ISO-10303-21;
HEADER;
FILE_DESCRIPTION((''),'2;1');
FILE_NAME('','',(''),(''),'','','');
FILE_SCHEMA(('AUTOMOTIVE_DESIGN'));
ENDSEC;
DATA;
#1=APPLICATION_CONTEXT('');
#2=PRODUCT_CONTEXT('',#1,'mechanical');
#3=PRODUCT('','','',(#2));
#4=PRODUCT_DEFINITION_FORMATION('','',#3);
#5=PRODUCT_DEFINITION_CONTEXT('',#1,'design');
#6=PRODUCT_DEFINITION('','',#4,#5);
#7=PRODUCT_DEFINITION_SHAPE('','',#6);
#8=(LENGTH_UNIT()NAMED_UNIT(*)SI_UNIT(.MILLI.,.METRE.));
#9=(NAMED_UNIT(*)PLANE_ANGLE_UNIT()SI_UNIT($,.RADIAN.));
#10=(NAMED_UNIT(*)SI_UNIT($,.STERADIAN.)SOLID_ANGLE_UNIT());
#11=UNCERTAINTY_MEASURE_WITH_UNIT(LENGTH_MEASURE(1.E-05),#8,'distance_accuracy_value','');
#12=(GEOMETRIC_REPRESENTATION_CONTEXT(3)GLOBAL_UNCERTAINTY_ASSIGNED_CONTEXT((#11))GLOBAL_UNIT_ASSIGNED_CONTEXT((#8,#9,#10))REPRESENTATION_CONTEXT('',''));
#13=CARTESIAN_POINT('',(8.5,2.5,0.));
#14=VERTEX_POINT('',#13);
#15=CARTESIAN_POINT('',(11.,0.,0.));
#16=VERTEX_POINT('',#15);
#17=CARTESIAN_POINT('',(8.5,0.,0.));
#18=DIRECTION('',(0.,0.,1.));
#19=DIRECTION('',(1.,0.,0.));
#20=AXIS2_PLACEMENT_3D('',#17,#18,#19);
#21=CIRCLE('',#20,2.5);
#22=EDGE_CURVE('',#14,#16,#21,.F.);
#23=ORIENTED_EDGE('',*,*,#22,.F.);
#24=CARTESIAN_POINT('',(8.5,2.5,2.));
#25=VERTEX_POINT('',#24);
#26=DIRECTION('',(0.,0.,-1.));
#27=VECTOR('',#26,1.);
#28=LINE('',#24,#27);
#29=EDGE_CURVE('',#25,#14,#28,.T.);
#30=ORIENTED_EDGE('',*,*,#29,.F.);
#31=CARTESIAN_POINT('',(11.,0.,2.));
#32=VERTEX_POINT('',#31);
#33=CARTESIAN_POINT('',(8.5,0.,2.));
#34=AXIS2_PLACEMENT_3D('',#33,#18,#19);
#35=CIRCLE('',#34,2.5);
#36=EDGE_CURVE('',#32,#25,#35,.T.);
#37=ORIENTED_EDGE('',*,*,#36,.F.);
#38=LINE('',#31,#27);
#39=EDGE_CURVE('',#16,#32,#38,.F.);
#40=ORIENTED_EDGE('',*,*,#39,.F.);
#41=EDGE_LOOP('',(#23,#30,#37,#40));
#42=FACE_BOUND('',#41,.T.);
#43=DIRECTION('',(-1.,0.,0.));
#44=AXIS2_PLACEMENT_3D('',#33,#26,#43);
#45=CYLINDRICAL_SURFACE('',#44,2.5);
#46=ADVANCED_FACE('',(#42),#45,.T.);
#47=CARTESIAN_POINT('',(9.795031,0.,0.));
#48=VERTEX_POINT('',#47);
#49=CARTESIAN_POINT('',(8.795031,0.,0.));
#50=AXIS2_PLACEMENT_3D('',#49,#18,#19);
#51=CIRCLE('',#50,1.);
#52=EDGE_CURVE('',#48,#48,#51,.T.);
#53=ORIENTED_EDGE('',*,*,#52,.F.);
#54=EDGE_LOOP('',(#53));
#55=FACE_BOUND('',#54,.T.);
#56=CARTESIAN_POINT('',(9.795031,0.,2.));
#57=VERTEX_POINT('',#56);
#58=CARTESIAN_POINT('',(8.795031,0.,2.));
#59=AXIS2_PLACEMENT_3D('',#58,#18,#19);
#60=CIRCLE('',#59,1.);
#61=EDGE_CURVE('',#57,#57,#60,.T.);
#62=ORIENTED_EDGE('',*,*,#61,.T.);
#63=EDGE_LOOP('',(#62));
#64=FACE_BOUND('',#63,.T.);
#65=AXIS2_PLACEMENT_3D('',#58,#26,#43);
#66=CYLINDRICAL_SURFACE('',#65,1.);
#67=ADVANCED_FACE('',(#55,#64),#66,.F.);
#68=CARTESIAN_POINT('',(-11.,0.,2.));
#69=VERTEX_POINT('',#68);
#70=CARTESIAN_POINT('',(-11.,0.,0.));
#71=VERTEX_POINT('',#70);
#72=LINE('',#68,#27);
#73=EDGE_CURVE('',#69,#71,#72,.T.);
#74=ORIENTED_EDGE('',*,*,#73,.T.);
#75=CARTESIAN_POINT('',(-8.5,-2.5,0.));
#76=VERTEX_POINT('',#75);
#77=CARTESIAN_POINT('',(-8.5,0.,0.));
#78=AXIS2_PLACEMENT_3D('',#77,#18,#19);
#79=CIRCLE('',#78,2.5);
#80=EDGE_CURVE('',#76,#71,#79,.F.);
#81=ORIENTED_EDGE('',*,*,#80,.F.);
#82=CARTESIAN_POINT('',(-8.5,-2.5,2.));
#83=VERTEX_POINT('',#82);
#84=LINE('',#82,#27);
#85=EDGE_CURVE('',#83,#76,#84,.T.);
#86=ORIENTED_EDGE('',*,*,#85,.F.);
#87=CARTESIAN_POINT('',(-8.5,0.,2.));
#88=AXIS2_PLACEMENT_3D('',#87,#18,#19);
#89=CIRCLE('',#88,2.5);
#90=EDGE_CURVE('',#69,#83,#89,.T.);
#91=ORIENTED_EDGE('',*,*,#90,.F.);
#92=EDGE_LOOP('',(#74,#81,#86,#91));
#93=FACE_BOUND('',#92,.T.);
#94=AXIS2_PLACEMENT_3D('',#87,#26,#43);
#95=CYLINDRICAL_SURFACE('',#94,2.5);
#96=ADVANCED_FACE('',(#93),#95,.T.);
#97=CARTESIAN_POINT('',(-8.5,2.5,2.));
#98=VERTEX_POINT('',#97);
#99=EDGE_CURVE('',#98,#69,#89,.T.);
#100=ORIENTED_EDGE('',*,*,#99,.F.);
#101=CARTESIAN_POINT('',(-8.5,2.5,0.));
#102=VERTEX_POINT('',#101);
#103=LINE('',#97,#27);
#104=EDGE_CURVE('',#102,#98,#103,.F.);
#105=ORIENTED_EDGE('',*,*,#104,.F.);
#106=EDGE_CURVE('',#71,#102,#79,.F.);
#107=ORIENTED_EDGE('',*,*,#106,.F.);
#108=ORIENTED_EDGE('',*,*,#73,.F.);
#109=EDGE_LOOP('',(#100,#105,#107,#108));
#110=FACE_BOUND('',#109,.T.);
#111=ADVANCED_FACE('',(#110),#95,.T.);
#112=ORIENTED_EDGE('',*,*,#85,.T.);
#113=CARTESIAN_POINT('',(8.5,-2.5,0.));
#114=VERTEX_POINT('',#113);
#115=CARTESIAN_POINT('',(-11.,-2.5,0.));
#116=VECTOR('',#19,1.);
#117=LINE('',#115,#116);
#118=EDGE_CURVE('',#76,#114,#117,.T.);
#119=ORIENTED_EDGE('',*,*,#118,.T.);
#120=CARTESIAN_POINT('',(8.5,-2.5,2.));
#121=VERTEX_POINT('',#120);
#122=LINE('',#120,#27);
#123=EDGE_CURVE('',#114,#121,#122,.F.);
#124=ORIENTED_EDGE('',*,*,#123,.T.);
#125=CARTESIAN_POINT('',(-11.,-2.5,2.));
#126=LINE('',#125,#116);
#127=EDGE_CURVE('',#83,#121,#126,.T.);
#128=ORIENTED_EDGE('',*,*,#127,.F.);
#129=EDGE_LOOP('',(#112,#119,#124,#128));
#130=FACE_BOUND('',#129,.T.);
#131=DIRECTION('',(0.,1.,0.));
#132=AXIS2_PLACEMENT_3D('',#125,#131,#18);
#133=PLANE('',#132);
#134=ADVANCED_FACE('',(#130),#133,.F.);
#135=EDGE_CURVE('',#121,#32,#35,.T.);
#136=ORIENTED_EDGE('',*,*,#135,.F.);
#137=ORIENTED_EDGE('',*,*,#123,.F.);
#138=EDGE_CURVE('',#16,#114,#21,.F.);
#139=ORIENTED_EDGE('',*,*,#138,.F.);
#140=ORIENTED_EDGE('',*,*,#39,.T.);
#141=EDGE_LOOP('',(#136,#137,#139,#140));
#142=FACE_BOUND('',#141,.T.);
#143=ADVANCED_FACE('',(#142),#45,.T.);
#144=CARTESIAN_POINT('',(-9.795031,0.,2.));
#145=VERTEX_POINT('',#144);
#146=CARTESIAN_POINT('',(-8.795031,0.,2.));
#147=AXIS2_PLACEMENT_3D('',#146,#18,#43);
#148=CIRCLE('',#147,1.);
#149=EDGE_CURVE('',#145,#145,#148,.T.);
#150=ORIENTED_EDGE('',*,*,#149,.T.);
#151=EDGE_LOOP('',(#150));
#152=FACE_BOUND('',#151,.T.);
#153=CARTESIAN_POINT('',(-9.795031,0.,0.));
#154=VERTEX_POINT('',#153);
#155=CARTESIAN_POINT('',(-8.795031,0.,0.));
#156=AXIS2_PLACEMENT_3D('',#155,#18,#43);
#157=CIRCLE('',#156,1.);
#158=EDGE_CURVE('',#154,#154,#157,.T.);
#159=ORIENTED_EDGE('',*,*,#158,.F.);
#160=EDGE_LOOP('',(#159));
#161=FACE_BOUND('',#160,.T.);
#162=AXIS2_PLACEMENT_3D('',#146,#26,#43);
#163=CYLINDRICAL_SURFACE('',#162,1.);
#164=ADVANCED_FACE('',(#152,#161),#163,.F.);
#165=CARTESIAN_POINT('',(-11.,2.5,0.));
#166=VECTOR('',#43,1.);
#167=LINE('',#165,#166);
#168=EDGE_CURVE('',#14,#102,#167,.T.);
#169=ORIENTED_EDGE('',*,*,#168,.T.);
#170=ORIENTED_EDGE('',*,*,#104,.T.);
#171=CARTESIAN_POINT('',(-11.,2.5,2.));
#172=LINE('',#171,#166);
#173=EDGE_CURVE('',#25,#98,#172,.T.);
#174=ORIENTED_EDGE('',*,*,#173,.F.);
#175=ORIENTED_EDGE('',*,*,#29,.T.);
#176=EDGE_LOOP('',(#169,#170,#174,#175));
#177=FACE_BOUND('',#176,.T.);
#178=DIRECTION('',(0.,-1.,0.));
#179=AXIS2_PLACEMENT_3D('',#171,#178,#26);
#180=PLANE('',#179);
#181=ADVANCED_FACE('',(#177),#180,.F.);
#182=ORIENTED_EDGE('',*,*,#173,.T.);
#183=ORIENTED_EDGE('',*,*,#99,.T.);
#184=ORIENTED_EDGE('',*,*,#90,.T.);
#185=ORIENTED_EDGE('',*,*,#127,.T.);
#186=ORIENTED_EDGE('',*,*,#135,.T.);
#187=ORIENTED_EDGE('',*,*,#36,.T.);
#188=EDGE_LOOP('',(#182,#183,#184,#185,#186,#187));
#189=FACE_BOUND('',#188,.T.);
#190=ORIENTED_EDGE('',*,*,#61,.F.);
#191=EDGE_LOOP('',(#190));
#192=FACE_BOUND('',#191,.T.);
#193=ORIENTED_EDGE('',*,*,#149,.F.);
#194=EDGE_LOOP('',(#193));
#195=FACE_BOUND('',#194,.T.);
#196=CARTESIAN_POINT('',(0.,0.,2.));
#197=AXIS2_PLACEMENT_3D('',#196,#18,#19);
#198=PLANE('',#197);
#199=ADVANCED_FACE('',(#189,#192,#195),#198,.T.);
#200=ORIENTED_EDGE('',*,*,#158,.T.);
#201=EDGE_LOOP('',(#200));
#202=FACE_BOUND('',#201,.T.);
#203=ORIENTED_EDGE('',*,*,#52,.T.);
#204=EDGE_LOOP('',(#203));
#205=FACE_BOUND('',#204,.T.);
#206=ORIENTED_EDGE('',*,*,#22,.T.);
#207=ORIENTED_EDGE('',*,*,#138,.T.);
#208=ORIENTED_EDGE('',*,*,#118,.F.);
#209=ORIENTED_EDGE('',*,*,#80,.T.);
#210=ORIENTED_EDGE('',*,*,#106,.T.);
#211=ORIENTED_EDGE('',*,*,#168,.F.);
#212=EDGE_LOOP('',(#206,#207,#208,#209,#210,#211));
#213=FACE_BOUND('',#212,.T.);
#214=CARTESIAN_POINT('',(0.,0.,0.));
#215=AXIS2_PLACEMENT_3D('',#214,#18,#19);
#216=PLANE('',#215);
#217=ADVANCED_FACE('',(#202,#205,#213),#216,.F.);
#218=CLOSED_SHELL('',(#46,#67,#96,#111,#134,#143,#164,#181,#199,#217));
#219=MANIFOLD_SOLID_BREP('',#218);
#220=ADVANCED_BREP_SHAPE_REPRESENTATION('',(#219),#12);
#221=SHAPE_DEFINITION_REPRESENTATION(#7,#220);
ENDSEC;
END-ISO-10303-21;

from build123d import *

# Parameters (mm, degrees)
SKETCH1_W           = 22
SKETCH1_H           = 5
SKETCH1_R           = 1
BOSS_EXTRUDE1_DEPTH = 2
FILLET1_R           = 2.5


with BuildPart() as part:
    # Sketch1 → Boss-Extrude1 (new body)
    with BuildSketch(Plane.XY):
        Rectangle(SKETCH1_W, SKETCH1_H)
        with Locations((8.795030905, 0)):
            Circle(SKETCH1_R, mode=Mode.SUBTRACT)
        with Locations(Location((-8.795030905, 0, 0), (0, 0, 180))):
            Circle(SKETCH1_R, mode=Mode.SUBTRACT)
    extrude(amount=BOSS_EXTRUDE1_DEPTH)

    # Fillet1
    fillet1_edges = [part.edges().sort_by_distance(p)[0] for p in [
        (-11, -2.5, 1),
        (-11, 2.5, 1),
        (11, -2.5, 1),
        (11, 2.5, 1),
    ]]
    fillet(fillet1_edges, radius=FILLET1_R - 0.0001)  # a hair under: the kernel refuses the full size


solid = part.part
